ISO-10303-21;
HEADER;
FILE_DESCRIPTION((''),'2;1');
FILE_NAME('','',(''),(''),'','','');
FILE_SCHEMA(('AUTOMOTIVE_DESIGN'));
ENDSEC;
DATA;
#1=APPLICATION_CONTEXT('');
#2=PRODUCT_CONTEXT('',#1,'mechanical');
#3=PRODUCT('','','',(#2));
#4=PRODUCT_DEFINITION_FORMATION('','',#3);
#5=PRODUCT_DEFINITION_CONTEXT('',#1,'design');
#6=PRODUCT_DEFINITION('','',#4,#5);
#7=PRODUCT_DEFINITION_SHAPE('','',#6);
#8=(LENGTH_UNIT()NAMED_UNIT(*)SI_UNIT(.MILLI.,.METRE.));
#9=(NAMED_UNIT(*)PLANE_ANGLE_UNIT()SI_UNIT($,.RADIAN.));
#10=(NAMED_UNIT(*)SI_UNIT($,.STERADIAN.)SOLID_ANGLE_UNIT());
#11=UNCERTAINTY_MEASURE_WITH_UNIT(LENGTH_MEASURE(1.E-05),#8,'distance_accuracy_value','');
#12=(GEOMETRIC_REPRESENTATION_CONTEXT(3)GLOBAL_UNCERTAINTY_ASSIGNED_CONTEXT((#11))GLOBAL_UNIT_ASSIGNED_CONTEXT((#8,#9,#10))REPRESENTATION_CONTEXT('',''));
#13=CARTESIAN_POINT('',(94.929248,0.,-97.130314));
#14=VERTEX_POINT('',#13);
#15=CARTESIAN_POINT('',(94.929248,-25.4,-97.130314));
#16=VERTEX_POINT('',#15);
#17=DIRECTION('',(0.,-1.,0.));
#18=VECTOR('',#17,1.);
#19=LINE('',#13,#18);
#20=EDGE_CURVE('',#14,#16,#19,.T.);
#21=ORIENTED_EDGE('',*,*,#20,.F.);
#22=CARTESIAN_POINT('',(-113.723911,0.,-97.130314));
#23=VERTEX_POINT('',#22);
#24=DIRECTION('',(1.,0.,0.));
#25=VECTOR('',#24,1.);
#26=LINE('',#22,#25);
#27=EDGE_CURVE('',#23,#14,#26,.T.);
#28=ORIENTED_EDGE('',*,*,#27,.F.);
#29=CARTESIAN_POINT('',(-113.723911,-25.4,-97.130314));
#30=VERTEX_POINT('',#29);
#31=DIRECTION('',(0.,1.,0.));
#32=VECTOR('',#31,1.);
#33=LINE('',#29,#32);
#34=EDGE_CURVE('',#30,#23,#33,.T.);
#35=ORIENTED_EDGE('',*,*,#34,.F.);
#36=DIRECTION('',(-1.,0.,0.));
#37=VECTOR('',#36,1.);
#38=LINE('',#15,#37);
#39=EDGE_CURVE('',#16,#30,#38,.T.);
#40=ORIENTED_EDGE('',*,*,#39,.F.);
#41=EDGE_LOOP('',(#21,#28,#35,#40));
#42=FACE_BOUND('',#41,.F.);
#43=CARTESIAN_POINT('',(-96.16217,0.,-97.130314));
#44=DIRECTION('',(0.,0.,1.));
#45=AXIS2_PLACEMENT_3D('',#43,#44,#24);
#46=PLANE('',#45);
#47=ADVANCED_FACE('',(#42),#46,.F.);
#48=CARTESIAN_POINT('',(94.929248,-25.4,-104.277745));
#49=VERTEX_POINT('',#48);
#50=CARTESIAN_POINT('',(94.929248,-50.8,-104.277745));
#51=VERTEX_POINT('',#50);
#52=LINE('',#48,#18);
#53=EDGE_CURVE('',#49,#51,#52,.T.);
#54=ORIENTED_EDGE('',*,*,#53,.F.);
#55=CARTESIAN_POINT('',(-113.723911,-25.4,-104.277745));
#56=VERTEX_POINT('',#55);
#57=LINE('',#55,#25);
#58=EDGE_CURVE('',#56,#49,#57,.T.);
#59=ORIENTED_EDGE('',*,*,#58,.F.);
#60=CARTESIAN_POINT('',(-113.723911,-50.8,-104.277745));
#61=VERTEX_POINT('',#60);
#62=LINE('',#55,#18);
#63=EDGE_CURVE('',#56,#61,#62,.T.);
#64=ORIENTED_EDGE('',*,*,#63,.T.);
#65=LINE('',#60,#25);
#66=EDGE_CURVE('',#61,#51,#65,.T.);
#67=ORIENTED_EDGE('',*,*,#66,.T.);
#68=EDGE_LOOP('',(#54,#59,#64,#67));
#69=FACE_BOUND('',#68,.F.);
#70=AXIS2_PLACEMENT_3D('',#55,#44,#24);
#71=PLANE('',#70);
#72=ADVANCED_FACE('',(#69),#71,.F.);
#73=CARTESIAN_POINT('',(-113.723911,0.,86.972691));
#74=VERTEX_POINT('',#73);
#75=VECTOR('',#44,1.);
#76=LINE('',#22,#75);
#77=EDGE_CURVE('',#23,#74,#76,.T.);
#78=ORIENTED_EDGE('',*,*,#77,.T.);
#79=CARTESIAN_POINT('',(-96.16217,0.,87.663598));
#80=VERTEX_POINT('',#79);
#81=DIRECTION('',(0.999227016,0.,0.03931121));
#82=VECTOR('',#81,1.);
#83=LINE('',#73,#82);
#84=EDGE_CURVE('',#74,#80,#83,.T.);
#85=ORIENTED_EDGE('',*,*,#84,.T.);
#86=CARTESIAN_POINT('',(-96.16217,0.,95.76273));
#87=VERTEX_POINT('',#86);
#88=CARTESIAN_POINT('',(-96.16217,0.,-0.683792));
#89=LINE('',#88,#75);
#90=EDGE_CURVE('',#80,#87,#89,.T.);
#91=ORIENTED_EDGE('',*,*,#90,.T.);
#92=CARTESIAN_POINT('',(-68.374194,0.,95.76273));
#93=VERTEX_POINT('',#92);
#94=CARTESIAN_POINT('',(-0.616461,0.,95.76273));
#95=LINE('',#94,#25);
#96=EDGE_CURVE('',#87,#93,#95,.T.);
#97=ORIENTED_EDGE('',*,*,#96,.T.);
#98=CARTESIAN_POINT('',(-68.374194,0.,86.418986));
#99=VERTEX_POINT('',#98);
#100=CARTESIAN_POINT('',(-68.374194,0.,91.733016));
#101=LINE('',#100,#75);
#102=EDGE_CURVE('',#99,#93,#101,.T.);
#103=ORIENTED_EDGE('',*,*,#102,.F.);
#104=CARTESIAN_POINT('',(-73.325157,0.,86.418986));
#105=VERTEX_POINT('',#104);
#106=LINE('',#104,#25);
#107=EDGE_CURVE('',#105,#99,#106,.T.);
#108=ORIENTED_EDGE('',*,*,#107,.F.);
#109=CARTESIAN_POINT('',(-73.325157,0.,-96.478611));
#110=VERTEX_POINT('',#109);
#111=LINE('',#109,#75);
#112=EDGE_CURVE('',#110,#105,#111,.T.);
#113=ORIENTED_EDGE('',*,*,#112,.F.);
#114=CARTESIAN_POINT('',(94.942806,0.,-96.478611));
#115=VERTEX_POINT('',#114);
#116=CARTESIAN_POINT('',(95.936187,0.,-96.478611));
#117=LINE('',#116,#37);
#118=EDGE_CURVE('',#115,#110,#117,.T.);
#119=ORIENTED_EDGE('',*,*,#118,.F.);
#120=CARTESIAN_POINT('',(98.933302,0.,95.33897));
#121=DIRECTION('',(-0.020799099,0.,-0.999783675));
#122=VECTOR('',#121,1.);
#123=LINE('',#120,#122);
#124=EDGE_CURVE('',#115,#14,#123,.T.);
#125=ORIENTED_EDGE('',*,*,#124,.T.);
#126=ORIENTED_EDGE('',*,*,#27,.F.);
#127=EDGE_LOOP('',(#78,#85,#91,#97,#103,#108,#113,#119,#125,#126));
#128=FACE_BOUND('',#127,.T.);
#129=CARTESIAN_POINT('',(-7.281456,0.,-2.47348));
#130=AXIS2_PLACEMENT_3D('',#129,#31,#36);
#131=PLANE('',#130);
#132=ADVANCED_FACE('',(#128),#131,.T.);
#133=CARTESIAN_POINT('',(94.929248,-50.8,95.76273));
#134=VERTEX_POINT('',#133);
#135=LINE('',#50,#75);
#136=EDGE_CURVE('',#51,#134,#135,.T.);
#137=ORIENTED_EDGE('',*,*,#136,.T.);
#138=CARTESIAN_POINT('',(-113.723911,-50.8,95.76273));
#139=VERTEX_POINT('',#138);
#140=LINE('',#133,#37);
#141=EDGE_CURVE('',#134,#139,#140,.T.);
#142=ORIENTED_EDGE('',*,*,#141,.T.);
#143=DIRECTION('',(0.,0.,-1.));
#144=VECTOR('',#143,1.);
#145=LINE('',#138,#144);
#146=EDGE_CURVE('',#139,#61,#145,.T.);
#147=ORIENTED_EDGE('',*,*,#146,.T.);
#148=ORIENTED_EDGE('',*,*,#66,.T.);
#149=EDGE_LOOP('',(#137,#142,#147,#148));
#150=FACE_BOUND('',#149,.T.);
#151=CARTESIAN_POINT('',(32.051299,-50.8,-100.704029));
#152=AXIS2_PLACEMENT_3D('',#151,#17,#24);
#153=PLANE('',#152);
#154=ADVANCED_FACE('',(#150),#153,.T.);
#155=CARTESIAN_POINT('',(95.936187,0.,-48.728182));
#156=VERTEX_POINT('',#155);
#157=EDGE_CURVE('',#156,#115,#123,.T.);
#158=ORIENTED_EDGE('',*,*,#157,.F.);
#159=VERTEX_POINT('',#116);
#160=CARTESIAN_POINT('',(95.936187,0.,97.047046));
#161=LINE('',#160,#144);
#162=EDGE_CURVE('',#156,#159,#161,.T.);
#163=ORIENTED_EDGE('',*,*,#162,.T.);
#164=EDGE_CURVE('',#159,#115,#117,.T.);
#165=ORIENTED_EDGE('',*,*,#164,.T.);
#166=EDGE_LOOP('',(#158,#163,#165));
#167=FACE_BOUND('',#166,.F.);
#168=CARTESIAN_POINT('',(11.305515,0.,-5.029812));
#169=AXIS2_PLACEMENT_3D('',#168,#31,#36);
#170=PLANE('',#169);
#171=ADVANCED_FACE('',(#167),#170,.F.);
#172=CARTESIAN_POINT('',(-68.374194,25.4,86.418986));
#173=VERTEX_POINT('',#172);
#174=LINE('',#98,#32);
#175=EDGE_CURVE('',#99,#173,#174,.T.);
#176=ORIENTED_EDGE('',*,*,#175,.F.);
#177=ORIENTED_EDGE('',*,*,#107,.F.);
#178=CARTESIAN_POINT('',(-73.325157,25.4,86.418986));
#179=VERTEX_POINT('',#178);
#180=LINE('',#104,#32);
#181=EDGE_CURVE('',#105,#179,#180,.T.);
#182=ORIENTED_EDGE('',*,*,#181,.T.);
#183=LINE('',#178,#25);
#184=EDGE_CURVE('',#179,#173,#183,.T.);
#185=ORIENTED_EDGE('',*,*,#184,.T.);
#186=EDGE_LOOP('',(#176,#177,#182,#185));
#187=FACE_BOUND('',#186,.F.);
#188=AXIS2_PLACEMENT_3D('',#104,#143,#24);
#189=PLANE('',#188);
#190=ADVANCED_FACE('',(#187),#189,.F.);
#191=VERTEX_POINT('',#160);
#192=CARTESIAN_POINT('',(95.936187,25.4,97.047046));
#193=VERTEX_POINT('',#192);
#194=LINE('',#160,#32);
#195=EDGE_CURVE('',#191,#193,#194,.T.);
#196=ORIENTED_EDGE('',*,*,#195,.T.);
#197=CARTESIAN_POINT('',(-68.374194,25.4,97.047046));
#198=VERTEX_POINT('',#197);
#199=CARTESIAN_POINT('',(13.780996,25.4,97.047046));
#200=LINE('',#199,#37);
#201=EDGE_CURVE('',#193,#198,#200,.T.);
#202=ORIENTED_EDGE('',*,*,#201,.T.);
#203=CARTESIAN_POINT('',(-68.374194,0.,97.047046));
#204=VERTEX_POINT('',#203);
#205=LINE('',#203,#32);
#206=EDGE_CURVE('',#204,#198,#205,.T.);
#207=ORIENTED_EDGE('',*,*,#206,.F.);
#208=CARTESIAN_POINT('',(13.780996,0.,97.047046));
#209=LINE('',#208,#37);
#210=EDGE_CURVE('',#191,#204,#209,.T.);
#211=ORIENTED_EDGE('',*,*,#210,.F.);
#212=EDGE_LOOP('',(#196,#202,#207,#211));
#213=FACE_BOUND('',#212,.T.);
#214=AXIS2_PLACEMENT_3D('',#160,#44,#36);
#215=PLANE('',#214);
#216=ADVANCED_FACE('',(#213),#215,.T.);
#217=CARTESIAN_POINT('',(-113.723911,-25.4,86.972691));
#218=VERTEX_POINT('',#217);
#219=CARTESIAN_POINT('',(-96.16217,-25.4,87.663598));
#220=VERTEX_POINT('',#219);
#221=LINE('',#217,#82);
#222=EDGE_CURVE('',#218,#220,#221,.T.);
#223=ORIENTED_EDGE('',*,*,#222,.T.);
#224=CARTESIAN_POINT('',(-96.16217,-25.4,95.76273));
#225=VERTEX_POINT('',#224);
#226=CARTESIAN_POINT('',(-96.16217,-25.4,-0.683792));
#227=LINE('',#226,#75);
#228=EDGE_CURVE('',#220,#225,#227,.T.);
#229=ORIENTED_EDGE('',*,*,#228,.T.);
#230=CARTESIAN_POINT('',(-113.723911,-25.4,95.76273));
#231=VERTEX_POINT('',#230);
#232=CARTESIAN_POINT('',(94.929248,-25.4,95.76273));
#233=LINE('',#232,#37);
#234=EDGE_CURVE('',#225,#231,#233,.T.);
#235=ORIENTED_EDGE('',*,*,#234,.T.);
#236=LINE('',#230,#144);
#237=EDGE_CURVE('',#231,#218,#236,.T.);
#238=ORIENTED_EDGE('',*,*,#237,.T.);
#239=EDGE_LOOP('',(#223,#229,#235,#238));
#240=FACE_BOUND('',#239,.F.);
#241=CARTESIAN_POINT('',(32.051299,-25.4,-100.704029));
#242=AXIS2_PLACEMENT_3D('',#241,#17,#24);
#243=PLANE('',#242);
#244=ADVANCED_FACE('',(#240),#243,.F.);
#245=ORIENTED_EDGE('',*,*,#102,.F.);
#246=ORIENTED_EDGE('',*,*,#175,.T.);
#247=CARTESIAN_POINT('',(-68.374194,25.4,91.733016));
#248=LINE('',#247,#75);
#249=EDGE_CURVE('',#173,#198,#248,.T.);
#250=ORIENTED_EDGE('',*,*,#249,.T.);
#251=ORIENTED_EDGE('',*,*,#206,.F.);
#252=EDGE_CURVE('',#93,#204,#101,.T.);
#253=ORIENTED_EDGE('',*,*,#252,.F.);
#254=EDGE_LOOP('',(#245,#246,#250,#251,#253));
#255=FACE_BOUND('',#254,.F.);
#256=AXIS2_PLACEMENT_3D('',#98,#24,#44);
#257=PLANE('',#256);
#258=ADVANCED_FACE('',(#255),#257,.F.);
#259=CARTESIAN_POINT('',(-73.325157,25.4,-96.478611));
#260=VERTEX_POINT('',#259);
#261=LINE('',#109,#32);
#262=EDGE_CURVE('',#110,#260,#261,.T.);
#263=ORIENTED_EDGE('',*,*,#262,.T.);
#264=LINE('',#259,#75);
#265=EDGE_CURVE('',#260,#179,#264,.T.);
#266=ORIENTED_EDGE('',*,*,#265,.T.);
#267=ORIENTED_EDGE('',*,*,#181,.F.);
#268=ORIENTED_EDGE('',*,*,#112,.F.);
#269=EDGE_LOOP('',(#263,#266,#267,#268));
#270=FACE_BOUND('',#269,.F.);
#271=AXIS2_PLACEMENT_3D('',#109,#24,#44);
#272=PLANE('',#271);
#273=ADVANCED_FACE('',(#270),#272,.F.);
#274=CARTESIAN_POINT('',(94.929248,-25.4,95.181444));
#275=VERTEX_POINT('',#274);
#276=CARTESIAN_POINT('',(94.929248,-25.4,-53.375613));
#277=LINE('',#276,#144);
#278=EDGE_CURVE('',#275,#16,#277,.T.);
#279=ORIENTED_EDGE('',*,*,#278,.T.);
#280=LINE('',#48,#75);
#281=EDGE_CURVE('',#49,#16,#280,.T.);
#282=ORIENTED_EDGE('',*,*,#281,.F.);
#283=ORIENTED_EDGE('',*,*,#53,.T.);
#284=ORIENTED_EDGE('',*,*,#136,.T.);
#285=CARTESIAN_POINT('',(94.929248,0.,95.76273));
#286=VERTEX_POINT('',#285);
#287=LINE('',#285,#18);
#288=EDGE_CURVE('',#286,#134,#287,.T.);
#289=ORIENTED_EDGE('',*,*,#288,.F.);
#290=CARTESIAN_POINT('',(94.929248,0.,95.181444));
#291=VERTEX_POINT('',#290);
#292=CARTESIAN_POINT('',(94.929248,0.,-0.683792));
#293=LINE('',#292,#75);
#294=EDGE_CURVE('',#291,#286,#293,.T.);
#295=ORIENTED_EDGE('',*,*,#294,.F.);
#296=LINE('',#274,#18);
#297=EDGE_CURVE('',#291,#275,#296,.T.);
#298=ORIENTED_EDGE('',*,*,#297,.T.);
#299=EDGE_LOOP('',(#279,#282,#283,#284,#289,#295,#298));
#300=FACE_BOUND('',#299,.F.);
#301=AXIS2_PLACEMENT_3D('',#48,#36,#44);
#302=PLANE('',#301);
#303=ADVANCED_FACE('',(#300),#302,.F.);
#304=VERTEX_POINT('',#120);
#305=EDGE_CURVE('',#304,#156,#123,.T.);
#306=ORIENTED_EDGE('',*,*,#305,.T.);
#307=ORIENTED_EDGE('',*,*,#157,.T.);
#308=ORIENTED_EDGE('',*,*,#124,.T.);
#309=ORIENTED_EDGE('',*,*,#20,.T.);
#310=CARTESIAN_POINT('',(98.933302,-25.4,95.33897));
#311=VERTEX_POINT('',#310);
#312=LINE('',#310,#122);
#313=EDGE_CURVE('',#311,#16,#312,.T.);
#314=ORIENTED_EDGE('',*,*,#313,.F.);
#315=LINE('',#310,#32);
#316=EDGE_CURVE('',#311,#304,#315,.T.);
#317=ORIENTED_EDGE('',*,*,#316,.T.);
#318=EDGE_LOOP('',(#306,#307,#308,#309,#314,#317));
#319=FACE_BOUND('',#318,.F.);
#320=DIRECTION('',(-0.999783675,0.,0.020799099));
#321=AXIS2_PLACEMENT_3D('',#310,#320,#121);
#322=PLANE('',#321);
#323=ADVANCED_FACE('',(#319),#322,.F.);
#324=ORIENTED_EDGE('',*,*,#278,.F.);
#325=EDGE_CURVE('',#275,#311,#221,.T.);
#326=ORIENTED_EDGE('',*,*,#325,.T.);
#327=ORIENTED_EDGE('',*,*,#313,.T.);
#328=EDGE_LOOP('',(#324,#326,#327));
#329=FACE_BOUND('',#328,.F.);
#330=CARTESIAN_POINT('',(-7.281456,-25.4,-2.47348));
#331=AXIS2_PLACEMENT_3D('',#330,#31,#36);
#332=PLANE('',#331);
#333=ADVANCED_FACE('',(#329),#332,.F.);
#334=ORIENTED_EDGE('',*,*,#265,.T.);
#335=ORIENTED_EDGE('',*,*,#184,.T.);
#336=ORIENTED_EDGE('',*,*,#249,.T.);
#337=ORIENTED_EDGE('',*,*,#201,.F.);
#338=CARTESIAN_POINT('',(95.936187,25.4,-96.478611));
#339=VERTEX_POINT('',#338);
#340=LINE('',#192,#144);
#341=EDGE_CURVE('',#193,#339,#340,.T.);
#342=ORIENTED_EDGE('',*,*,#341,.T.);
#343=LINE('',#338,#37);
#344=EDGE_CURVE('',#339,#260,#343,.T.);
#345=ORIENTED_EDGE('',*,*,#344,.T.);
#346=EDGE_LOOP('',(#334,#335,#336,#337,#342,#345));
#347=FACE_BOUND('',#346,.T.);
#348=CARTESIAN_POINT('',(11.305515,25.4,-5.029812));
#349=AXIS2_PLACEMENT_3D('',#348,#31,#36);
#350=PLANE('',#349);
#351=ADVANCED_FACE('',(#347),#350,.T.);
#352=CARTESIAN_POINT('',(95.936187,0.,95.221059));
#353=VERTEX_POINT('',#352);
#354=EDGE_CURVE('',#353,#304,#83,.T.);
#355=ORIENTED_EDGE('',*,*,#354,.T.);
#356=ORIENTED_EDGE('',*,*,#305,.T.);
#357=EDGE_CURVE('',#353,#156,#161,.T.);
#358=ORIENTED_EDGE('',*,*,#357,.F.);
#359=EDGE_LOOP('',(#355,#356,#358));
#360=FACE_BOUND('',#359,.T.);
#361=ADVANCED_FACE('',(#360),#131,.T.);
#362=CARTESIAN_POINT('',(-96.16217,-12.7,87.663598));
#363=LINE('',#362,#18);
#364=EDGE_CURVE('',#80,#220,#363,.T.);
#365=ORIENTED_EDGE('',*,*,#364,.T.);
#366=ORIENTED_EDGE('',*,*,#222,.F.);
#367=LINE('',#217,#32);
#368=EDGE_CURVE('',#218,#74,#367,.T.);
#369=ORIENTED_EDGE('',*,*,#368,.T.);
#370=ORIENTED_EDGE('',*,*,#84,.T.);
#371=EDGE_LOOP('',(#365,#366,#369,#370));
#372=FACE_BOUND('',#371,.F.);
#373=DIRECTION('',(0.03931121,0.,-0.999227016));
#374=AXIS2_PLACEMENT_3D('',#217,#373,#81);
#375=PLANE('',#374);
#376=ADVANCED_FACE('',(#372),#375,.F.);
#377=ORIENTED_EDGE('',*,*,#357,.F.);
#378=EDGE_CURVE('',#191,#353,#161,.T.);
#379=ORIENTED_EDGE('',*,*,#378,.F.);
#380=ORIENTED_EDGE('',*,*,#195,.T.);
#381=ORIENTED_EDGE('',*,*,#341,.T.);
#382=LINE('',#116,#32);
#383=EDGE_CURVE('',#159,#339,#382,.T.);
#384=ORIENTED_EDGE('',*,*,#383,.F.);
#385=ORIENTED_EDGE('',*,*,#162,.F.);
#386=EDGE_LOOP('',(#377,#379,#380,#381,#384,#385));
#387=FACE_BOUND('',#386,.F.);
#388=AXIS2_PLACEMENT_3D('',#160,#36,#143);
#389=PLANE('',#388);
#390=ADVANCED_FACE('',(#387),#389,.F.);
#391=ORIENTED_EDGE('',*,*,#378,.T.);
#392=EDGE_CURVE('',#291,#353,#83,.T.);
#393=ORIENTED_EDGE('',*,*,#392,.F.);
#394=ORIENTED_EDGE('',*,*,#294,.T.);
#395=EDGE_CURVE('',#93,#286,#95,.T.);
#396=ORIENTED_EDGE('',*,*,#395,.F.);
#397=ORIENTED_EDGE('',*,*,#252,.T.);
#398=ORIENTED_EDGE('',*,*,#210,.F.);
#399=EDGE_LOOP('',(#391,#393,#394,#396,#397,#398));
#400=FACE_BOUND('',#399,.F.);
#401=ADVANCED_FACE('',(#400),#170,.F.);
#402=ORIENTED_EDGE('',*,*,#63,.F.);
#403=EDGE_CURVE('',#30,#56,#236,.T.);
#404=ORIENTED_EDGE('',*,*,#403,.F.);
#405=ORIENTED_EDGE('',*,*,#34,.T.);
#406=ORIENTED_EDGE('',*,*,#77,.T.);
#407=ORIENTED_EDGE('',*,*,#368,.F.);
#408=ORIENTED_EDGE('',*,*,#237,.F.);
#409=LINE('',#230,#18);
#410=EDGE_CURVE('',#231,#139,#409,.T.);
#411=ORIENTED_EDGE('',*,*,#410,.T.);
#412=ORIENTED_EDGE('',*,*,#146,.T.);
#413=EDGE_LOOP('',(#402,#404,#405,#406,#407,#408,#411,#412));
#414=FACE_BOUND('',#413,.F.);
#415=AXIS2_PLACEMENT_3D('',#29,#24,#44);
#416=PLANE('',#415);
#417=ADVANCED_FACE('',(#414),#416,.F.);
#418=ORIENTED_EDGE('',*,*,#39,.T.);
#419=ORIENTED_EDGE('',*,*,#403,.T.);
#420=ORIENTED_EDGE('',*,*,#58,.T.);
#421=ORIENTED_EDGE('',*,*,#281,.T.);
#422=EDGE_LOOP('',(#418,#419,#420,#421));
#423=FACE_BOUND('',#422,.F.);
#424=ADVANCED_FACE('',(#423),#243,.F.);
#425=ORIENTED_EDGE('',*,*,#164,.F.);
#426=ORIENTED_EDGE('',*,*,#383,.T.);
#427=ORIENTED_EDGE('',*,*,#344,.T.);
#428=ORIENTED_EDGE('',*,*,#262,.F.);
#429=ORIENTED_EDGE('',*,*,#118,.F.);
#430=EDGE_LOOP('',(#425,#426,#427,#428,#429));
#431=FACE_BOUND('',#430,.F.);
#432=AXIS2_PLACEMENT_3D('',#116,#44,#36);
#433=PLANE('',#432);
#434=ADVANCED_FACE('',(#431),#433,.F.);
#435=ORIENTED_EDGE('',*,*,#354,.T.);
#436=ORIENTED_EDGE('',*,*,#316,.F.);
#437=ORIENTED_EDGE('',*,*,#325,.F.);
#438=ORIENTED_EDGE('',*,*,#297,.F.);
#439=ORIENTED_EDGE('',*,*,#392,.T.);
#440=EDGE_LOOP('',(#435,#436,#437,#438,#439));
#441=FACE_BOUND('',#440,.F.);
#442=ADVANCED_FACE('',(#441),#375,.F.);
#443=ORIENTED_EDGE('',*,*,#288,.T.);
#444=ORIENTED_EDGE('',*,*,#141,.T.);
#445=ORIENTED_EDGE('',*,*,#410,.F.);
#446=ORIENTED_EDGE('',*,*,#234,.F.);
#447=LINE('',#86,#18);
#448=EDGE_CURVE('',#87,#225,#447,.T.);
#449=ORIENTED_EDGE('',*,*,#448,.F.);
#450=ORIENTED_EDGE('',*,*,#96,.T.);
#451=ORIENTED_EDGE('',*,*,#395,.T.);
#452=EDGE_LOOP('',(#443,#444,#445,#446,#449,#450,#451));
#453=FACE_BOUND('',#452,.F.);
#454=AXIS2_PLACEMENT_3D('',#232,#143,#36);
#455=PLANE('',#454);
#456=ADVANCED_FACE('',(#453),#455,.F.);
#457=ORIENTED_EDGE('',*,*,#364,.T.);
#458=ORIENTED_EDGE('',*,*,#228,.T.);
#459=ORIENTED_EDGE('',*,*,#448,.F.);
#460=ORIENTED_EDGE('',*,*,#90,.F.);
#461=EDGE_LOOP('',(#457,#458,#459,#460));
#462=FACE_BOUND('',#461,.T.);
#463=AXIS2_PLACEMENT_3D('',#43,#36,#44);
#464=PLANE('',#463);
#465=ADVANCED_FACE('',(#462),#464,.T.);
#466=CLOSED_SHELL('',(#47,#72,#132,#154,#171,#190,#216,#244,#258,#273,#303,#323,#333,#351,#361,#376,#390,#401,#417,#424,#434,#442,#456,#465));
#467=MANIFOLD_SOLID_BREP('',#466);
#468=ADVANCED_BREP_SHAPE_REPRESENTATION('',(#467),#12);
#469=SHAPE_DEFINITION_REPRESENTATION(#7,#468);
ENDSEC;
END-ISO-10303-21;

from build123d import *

# Parameters (mm, degrees)
F0_W      = 191.0914182663
F0_H      = 192.8930431604
F1_DEPTH  = 25.4
F2_W      = 25.4
F2_H      = 25.5114277713
F3_DEPTH  = 25.4
F4_W      = 125.7558986545
F4_H      = 7.1474313736
F4_H_2    = 192.8930431604
F4_W_2    = 50.9491413832
F5_DEPTH  = 25.4
F7_DEPTH  = 25.4
F9_W      = 164.3103808165
F9_H      = 10.6280595064
F10_DEPTH = 25.4


with BuildPart() as f1:
    # F0 (on Front) → F1 (new body)
    with BuildSketch(Plane.XZ):
        with Locations((-0.6164610386, -0.6837919354)):
            Rectangle(F0_W, F0_H)
        Polygon((0, 75.5859687924), (74.6201202273, 75.5859687924), (74.6201202273, 11.123508215), (81.607028842, -13.4125072509), (74.6201202273, -13.2084926445), (74.6201202273, -76.0672464967), (0, -76.0672464967), (-77.7053460479, -76.0672464967), (-77.7053460479, -8.7606571615), (-77.7053460479, 12.5154424459), (-77.7053460479, 75.5859687924), align=None, mode=Mode.SUBTRACT)
    extrude(amount=F1_DEPTH)

    # F2 (on face) → F3 (join)
    with BuildSketch(Plane(origin=(71.9530620256, 0, 20.4894502783), x_dir=(0, -1, 0), z_dir=(-0.9617656717, 0, -0.2738736803))):
        with Locations((12.7, -22.4939924905)):
            Rectangle(F2_W, F2_H)
    extrude(amount=F3_DEPTH)

    # F4 (on face) → F5 (join)
    with BuildSketch(Plane.XZ.offset(25.4)):
        with Locations((32.0512987673, -100.7040292025)):
            Rectangle(F4_W, F4_H)
        with Locations((32.0512987673, -0.6837919354)):
            Rectangle(F4_W, F4_H_2)
        Polygon((-30.8266505599, -104.2777448893), (-30.8266505599, -97.1303135157), (-81.7757919431, -97.1303135157), (-81.7757919431, 95.7627296448), (-113.723911345, 95.7627296448), (-113.723911345, -104.2777448893), align=None)
        with Locations((-56.3012212515, -0.6837919354)):
            Rectangle(F4_W_2, F4_H_2)
    extrude(amount=F5_DEPTH)

    # F6 (on face) → F7 (join)
    with BuildSketch(Plane(origin=(0, -25.4, 0), x_dir=(-1, 0, 0), z_dir=(0, 1, 0))):
        Polygon((-98.9333018661, 95.3389704227), (-94.9292480946, -97.1303135157), (113.723911345, -97.1303135157), (113.723911345, 86.9726911187), align=None)
    extrude(amount=F7_DEPTH)

    # F9 (on face) → F10 (join)
    with BuildSketch(Plane(origin=(0, 0, 0), x_dir=(-1, 0, 0), z_dir=(0, 1, 0))):
        Polygon((-95.9361866117, 86.4189863205), (-95.9361866117, -96.4786112309), (73.3251571655, -96.4786112309), (73.3251571655, 86.4189863205), (68.3741942048, 86.4189863205), align=None)
        with Locations((-13.7809962034, 91.7330160737)):
            Rectangle(F9_W, F9_H)
    extrude(amount=F10_DEPTH)


solid = f1.part
